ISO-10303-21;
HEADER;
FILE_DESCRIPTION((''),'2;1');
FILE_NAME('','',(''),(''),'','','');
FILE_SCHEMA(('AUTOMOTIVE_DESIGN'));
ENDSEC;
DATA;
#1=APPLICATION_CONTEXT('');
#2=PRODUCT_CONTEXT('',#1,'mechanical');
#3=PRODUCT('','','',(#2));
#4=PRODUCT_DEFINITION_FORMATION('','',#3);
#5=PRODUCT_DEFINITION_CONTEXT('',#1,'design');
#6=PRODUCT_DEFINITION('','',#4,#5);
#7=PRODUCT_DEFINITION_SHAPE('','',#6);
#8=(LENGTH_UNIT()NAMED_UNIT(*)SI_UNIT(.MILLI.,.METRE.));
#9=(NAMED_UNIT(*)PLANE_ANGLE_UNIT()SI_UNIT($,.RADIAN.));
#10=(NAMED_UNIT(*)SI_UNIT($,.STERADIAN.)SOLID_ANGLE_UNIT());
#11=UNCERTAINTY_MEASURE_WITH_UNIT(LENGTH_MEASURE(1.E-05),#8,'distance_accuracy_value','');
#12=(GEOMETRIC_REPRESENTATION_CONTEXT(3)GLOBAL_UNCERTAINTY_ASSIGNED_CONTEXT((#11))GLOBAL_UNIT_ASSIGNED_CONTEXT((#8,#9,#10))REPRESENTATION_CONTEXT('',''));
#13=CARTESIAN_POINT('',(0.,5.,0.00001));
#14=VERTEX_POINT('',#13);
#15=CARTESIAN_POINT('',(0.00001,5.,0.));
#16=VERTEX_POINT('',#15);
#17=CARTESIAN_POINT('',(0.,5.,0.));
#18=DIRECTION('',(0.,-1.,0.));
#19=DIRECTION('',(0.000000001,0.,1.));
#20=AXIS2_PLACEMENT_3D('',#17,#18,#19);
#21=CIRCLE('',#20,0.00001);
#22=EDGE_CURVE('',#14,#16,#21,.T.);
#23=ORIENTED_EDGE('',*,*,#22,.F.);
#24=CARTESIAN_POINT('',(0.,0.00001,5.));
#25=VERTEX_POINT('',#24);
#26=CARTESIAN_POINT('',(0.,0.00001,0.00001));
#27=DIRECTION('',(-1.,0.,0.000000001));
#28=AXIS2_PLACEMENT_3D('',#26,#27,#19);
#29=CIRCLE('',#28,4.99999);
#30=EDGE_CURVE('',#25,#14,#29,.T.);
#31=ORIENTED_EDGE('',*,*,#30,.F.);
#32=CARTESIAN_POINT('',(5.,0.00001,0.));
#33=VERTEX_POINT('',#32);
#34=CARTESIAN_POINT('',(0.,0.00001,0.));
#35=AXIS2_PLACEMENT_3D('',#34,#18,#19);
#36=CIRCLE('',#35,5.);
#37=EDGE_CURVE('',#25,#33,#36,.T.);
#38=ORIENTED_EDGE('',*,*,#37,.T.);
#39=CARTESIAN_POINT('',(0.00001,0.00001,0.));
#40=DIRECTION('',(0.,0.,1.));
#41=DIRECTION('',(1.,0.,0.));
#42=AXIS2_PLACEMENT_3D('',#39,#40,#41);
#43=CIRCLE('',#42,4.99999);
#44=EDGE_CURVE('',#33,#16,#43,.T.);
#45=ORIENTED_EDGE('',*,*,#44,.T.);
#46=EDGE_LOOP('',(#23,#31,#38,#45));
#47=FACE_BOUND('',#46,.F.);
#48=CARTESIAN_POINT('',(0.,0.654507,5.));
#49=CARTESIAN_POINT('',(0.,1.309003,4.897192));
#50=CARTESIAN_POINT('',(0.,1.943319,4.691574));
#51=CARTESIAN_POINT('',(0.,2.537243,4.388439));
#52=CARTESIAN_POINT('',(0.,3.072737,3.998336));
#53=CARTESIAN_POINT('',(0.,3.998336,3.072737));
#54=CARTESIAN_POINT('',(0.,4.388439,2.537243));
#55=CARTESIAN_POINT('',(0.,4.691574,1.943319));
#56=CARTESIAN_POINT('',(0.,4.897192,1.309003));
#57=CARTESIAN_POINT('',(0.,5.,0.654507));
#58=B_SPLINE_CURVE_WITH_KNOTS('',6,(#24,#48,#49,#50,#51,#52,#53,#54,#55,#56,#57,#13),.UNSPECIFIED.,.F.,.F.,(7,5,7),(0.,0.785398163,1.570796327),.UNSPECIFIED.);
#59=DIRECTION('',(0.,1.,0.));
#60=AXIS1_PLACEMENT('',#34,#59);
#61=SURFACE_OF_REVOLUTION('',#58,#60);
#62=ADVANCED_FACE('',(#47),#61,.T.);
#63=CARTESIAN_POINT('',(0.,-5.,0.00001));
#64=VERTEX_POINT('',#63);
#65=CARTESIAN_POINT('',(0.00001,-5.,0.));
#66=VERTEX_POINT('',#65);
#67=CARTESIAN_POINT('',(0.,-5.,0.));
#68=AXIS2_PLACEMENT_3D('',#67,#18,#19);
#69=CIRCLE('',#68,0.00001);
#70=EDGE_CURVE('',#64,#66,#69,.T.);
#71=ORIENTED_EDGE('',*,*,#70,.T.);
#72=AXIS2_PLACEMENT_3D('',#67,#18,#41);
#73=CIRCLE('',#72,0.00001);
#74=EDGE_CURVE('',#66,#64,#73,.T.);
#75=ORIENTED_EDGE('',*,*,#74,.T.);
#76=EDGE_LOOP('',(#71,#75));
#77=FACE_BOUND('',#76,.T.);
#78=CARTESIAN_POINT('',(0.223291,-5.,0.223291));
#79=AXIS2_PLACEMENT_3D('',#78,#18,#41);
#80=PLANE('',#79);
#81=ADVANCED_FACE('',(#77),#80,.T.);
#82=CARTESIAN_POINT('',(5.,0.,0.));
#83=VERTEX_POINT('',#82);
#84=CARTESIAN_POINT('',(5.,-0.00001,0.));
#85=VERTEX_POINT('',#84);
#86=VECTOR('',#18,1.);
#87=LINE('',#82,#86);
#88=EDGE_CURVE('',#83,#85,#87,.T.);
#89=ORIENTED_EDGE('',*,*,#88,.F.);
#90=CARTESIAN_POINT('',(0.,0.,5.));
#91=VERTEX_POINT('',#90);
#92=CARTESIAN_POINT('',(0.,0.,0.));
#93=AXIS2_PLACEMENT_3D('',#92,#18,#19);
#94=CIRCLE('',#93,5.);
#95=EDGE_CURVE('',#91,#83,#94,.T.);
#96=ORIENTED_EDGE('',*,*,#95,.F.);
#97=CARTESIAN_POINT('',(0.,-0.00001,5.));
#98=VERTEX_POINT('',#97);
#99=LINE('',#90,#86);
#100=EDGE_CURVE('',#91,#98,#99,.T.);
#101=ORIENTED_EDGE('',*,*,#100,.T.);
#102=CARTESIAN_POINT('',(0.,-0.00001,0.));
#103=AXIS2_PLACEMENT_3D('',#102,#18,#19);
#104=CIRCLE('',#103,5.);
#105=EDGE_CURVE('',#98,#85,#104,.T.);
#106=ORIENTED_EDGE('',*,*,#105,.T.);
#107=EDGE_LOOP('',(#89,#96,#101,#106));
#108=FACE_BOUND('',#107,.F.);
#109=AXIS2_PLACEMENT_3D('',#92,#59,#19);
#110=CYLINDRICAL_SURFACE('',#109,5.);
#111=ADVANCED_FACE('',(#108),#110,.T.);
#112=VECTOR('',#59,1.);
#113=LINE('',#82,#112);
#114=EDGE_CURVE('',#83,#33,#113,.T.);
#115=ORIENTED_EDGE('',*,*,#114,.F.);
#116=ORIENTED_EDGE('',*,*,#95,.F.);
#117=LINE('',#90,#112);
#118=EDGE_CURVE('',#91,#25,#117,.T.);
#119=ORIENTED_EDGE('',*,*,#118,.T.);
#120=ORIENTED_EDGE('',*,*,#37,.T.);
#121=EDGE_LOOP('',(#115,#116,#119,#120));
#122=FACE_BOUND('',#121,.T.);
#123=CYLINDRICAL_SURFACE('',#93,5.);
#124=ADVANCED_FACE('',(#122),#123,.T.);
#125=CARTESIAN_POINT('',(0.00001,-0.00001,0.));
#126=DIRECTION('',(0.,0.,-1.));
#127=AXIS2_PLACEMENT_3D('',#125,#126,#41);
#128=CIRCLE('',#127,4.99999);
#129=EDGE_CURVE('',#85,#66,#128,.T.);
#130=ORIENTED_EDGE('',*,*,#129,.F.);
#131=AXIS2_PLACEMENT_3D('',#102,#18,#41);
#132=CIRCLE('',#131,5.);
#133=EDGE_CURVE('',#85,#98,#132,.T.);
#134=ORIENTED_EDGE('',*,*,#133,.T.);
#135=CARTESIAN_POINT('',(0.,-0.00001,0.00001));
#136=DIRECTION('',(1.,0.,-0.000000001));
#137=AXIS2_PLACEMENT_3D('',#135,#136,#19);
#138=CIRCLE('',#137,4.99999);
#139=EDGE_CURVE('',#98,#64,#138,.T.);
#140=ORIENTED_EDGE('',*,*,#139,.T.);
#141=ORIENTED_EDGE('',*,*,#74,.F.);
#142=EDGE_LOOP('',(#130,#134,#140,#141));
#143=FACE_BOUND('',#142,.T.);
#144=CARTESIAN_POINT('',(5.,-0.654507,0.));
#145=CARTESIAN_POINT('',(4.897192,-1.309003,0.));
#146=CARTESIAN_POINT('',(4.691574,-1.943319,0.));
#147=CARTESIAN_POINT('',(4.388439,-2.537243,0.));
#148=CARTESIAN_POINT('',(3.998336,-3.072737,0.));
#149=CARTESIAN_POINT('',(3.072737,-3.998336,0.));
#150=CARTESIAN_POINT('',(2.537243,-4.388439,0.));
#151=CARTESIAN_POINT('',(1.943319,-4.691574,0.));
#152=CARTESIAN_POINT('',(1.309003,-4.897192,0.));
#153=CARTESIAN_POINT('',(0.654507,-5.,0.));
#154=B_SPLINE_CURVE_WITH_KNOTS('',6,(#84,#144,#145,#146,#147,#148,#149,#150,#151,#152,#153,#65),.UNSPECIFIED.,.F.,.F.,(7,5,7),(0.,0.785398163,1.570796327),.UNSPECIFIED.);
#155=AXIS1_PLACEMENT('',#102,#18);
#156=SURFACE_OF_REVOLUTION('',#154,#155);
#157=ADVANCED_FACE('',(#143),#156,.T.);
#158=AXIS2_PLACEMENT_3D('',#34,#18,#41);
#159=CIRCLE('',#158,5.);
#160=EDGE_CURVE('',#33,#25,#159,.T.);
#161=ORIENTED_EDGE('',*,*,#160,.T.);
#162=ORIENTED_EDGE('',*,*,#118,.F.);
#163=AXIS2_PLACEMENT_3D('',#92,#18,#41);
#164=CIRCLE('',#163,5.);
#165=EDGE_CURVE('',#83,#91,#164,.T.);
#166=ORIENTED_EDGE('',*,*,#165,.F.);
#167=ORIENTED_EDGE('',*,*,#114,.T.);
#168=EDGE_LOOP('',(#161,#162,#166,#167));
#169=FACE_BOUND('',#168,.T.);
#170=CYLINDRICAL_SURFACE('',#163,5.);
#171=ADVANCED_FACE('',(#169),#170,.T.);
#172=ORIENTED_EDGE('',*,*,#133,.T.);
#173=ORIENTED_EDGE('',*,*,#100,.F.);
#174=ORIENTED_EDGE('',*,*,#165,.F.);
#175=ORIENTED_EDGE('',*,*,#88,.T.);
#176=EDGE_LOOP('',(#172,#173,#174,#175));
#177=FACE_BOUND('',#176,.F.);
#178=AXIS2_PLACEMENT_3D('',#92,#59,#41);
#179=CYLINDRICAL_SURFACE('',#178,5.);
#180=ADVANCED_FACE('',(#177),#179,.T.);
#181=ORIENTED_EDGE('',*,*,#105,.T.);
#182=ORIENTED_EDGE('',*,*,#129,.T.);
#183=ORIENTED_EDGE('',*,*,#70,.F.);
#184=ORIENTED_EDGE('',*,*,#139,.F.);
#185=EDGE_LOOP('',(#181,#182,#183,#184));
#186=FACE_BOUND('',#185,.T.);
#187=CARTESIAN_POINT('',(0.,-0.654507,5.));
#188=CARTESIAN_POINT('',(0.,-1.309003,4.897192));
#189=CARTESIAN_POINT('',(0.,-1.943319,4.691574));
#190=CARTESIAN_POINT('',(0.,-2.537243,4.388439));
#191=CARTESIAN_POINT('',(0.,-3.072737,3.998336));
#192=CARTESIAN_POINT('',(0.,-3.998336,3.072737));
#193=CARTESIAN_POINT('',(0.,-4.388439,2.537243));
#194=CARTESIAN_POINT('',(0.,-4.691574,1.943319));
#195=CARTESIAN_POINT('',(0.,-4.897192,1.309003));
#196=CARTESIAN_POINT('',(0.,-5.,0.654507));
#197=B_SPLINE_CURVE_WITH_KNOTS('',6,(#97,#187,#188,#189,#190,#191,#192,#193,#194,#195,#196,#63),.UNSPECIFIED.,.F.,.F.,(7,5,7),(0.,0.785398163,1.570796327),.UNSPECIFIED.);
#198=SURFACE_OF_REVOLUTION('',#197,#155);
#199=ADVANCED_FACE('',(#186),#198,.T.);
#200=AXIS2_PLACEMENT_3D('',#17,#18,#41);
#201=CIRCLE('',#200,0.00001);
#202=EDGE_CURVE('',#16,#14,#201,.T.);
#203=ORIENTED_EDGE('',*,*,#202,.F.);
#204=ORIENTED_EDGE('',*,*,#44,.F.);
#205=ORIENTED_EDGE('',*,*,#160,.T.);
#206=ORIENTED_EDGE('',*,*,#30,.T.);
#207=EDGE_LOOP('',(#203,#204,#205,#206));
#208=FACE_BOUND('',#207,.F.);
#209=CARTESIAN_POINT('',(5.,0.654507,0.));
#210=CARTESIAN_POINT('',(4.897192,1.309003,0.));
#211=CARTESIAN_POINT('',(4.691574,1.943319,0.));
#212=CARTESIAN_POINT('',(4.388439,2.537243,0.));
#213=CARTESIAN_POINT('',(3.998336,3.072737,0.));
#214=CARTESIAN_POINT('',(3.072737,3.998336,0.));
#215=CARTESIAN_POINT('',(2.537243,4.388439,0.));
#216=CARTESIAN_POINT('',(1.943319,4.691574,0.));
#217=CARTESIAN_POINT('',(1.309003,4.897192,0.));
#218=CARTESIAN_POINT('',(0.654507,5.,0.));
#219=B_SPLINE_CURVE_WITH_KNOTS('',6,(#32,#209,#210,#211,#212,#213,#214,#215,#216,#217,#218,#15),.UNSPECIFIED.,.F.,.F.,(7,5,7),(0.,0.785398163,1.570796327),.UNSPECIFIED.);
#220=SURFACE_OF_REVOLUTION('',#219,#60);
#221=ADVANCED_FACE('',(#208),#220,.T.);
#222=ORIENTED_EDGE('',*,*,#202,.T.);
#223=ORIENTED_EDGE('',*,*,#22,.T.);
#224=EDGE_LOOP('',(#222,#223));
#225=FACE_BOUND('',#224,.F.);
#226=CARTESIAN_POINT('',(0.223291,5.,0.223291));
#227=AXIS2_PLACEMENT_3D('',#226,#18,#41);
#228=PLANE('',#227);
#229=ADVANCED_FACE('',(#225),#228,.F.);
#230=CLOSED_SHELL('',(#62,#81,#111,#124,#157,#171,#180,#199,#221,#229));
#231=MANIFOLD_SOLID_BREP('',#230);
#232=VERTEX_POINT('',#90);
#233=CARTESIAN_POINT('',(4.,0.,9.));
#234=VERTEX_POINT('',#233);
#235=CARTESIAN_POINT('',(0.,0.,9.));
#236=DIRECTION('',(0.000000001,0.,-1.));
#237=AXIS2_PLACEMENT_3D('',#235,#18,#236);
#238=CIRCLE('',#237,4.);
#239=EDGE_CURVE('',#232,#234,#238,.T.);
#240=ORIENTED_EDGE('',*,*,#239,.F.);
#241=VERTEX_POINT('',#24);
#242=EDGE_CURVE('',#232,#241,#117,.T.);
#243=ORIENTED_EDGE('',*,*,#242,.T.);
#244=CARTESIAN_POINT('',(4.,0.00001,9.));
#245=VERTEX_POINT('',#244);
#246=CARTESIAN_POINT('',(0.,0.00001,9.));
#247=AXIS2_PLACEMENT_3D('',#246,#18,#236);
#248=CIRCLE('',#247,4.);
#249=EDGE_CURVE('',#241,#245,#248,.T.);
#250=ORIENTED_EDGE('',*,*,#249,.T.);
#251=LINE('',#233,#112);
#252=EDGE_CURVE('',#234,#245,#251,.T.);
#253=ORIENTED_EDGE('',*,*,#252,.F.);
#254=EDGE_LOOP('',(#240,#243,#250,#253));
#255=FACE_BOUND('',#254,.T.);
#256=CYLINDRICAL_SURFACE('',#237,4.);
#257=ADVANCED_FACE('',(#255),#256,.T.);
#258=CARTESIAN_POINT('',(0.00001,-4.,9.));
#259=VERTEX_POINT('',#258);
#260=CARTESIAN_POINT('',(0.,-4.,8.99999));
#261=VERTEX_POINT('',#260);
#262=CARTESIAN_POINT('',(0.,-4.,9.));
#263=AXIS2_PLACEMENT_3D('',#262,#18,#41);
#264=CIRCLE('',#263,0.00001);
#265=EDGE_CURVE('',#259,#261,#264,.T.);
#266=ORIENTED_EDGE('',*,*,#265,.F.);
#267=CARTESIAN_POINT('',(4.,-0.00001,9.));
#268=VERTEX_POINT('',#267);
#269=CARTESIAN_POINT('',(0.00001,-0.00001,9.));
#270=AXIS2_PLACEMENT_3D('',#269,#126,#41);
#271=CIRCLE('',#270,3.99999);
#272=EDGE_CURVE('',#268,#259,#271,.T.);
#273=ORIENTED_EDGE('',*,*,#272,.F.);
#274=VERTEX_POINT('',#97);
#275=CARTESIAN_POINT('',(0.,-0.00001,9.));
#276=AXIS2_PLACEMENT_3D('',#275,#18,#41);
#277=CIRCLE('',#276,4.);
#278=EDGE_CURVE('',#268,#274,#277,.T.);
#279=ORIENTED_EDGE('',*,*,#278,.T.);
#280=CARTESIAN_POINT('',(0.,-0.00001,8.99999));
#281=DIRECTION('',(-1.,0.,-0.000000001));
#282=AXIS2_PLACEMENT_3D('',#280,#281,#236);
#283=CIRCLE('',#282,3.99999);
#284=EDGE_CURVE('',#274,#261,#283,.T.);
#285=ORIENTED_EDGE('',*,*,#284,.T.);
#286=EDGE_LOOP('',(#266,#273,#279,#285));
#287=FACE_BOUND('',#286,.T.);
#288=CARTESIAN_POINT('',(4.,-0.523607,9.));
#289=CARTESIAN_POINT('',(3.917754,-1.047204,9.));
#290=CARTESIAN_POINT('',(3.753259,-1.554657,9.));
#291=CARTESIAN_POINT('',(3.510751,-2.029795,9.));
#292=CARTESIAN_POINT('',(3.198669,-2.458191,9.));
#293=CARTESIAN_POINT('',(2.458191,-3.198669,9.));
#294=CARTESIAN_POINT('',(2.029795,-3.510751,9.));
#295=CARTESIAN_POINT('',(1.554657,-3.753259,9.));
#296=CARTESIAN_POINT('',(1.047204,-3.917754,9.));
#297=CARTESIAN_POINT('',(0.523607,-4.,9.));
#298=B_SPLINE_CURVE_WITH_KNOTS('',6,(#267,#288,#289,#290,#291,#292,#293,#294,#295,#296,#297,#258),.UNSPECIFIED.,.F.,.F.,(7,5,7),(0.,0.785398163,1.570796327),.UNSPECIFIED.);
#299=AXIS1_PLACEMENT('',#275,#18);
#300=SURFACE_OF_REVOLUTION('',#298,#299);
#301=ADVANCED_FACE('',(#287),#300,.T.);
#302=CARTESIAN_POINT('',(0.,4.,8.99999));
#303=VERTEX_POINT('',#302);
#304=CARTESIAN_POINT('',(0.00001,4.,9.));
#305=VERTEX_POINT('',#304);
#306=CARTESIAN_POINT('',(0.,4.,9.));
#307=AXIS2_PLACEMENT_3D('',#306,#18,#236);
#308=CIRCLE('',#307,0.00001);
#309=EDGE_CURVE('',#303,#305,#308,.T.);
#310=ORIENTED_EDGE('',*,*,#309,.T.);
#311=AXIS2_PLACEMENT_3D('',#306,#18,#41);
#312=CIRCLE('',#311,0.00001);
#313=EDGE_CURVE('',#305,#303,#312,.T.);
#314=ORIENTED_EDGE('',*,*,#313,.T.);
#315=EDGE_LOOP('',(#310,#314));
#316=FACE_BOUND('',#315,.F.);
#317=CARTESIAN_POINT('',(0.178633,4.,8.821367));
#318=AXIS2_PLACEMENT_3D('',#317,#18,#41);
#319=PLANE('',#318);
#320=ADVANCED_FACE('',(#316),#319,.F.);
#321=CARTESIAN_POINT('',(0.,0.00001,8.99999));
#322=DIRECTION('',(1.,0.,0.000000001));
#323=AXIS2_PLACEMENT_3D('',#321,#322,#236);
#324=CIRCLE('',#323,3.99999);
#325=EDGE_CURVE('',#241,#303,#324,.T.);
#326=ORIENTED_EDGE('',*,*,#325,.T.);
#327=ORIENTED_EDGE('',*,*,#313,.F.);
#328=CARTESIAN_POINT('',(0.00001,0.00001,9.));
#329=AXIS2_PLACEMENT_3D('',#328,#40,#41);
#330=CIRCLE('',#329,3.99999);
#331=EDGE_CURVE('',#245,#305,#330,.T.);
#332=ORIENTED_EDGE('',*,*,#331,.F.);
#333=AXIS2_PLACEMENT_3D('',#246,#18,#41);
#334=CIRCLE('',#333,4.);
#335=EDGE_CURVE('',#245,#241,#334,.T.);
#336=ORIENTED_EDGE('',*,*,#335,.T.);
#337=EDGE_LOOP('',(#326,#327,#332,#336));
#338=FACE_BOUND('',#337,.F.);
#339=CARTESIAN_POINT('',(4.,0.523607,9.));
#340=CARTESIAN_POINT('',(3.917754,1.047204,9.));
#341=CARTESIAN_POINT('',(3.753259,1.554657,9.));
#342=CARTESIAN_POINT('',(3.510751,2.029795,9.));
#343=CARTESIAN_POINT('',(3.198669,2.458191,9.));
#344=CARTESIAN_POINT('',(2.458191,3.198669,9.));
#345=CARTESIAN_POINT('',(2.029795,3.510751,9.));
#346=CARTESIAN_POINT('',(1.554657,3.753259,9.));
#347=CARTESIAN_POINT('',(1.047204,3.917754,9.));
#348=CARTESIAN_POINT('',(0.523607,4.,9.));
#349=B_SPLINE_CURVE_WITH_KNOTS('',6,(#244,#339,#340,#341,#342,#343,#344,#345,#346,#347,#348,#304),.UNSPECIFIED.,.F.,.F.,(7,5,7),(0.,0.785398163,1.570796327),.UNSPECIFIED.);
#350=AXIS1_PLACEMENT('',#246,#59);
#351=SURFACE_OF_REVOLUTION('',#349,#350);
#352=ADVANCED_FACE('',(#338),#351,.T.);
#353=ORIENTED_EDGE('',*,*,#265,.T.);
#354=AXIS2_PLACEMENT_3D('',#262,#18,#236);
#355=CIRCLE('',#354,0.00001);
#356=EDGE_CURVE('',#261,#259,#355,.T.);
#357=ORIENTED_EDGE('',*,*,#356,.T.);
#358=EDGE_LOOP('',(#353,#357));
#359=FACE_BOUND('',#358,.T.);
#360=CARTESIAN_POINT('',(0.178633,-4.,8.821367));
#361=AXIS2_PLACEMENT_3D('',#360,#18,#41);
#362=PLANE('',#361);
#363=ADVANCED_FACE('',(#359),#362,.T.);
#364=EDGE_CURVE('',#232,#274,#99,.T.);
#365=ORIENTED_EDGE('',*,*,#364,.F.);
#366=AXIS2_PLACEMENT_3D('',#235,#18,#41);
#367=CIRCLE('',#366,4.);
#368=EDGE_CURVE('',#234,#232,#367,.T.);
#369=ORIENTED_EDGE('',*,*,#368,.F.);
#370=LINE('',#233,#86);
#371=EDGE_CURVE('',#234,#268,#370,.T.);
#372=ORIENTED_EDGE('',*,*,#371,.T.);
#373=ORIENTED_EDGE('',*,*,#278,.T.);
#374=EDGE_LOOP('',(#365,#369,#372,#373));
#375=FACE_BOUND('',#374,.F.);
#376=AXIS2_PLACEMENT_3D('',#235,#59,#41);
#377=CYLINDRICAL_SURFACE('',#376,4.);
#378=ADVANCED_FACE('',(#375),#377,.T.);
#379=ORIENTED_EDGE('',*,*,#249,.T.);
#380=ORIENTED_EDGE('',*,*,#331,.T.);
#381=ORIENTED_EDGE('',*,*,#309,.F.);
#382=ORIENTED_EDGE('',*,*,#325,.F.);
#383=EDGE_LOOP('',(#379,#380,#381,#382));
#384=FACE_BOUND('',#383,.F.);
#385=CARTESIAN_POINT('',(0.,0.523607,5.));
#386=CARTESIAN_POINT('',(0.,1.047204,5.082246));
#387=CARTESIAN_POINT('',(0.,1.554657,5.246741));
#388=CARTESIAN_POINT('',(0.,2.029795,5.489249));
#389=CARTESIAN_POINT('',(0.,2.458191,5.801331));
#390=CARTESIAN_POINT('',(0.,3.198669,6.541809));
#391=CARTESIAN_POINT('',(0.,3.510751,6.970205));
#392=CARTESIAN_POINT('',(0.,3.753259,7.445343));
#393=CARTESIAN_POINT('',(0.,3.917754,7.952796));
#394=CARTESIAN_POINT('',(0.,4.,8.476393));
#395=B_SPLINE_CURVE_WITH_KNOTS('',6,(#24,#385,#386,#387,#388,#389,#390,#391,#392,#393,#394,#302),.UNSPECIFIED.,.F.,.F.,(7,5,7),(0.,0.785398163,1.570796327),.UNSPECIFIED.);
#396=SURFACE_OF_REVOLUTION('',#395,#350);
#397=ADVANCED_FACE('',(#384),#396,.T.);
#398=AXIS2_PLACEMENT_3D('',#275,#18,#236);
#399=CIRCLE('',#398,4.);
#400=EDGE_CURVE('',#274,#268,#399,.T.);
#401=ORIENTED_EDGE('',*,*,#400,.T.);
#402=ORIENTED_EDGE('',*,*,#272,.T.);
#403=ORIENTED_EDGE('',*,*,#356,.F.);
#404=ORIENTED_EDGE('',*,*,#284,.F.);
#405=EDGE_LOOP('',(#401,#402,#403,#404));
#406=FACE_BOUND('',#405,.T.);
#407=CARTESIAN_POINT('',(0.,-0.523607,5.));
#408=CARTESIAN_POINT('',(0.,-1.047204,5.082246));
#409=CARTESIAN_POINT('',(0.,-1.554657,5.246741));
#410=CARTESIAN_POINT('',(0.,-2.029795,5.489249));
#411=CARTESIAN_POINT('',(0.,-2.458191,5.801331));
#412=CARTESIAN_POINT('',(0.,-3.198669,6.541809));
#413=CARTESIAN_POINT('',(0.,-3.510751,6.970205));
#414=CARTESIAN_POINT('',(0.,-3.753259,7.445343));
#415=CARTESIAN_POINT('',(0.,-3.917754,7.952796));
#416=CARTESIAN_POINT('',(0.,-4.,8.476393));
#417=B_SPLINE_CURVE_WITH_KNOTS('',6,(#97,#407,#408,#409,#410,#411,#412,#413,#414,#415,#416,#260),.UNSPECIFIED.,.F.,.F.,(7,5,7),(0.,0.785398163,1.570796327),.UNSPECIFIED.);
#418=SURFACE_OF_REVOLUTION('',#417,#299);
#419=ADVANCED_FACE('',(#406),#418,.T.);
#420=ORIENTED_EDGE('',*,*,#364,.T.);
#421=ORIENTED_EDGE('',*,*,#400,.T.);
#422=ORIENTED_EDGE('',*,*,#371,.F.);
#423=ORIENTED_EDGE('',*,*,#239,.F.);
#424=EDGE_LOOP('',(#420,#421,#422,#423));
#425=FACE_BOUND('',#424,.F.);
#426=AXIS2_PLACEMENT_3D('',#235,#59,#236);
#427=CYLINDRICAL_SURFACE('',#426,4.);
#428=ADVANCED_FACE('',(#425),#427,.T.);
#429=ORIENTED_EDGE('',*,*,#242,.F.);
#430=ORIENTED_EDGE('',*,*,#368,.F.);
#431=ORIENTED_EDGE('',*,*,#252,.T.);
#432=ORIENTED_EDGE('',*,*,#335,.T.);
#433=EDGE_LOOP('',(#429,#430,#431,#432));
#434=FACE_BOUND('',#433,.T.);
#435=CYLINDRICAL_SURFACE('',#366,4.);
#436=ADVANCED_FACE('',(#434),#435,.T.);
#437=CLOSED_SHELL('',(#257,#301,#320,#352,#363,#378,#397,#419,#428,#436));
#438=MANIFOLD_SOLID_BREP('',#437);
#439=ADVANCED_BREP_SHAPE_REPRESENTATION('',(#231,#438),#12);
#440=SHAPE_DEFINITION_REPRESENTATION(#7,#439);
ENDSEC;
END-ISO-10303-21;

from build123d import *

# Parameters (mm, degrees)
F1_DEPTH      = 5
F1_DEPTH_BACK = 5
F2_R          = 4.99999
F3_DEPTH      = 4
F3_DEPTH_BACK = 4
F4_R          = 3.99999


# Not quite as in the source:
# - a fillet or chamfer is up to 0.001 mm smaller than in the source, because OpenCascade refuses the exact size


with BuildPart() as f1:
    # F0 (on Front) → F1 (new body, two sides)
    with BuildSketch(Plane.XZ) as f1_sk:
        with BuildLine():
            ThreePointArc((2.8e-09, 5), (-3.5355339069, -3.5355339049), (5, 0))
            ThreePointArc((5, 0), (3.5355339069, 3.5355339049), (2.8e-09, 5))
        make_face()
    extrude(amount=F1_DEPTH)
    extrude(f1_sk.sketch, amount=-F1_DEPTH_BACK)

    # F2 (radius 5 in the source; OpenCascade refuses exactly that, so slightly less here)
    f2_edges = [f1.edges().sort_by_distance(p)[0] for p in [
        (-5, -5, 0),
        (-5, 5, 0),
    ]]
    fillet(f2_edges, radius=F2_R)


with BuildPart() as f3:
    # F0 (on Front) → F3 (new body, two sides)
    with BuildSketch(Plane.XZ) as f3_sk:
        with BuildLine():
            ThreePointArc((4, 9), (-2.8284271257, 11.8284271237), (2.8e-09, 5))
            ThreePointArc((2.8e-09, 5), (2.8284271257, 6.1715728763), (4, 9))
        make_face()
    extrude(amount=F3_DEPTH)
    extrude(f3_sk.sketch, amount=-F3_DEPTH_BACK)

    # F4 (radius 4 in the source; OpenCascade refuses exactly that, so slightly less here)
    f4_edges = [f3.edges().sort_by_distance(p)[0] for p in [
        (0, 4, 13),
        (0, -4, 13),
    ]]
    fillet(f4_edges, radius=F4_R)


solid = Compound([f1.part, f3.part])
